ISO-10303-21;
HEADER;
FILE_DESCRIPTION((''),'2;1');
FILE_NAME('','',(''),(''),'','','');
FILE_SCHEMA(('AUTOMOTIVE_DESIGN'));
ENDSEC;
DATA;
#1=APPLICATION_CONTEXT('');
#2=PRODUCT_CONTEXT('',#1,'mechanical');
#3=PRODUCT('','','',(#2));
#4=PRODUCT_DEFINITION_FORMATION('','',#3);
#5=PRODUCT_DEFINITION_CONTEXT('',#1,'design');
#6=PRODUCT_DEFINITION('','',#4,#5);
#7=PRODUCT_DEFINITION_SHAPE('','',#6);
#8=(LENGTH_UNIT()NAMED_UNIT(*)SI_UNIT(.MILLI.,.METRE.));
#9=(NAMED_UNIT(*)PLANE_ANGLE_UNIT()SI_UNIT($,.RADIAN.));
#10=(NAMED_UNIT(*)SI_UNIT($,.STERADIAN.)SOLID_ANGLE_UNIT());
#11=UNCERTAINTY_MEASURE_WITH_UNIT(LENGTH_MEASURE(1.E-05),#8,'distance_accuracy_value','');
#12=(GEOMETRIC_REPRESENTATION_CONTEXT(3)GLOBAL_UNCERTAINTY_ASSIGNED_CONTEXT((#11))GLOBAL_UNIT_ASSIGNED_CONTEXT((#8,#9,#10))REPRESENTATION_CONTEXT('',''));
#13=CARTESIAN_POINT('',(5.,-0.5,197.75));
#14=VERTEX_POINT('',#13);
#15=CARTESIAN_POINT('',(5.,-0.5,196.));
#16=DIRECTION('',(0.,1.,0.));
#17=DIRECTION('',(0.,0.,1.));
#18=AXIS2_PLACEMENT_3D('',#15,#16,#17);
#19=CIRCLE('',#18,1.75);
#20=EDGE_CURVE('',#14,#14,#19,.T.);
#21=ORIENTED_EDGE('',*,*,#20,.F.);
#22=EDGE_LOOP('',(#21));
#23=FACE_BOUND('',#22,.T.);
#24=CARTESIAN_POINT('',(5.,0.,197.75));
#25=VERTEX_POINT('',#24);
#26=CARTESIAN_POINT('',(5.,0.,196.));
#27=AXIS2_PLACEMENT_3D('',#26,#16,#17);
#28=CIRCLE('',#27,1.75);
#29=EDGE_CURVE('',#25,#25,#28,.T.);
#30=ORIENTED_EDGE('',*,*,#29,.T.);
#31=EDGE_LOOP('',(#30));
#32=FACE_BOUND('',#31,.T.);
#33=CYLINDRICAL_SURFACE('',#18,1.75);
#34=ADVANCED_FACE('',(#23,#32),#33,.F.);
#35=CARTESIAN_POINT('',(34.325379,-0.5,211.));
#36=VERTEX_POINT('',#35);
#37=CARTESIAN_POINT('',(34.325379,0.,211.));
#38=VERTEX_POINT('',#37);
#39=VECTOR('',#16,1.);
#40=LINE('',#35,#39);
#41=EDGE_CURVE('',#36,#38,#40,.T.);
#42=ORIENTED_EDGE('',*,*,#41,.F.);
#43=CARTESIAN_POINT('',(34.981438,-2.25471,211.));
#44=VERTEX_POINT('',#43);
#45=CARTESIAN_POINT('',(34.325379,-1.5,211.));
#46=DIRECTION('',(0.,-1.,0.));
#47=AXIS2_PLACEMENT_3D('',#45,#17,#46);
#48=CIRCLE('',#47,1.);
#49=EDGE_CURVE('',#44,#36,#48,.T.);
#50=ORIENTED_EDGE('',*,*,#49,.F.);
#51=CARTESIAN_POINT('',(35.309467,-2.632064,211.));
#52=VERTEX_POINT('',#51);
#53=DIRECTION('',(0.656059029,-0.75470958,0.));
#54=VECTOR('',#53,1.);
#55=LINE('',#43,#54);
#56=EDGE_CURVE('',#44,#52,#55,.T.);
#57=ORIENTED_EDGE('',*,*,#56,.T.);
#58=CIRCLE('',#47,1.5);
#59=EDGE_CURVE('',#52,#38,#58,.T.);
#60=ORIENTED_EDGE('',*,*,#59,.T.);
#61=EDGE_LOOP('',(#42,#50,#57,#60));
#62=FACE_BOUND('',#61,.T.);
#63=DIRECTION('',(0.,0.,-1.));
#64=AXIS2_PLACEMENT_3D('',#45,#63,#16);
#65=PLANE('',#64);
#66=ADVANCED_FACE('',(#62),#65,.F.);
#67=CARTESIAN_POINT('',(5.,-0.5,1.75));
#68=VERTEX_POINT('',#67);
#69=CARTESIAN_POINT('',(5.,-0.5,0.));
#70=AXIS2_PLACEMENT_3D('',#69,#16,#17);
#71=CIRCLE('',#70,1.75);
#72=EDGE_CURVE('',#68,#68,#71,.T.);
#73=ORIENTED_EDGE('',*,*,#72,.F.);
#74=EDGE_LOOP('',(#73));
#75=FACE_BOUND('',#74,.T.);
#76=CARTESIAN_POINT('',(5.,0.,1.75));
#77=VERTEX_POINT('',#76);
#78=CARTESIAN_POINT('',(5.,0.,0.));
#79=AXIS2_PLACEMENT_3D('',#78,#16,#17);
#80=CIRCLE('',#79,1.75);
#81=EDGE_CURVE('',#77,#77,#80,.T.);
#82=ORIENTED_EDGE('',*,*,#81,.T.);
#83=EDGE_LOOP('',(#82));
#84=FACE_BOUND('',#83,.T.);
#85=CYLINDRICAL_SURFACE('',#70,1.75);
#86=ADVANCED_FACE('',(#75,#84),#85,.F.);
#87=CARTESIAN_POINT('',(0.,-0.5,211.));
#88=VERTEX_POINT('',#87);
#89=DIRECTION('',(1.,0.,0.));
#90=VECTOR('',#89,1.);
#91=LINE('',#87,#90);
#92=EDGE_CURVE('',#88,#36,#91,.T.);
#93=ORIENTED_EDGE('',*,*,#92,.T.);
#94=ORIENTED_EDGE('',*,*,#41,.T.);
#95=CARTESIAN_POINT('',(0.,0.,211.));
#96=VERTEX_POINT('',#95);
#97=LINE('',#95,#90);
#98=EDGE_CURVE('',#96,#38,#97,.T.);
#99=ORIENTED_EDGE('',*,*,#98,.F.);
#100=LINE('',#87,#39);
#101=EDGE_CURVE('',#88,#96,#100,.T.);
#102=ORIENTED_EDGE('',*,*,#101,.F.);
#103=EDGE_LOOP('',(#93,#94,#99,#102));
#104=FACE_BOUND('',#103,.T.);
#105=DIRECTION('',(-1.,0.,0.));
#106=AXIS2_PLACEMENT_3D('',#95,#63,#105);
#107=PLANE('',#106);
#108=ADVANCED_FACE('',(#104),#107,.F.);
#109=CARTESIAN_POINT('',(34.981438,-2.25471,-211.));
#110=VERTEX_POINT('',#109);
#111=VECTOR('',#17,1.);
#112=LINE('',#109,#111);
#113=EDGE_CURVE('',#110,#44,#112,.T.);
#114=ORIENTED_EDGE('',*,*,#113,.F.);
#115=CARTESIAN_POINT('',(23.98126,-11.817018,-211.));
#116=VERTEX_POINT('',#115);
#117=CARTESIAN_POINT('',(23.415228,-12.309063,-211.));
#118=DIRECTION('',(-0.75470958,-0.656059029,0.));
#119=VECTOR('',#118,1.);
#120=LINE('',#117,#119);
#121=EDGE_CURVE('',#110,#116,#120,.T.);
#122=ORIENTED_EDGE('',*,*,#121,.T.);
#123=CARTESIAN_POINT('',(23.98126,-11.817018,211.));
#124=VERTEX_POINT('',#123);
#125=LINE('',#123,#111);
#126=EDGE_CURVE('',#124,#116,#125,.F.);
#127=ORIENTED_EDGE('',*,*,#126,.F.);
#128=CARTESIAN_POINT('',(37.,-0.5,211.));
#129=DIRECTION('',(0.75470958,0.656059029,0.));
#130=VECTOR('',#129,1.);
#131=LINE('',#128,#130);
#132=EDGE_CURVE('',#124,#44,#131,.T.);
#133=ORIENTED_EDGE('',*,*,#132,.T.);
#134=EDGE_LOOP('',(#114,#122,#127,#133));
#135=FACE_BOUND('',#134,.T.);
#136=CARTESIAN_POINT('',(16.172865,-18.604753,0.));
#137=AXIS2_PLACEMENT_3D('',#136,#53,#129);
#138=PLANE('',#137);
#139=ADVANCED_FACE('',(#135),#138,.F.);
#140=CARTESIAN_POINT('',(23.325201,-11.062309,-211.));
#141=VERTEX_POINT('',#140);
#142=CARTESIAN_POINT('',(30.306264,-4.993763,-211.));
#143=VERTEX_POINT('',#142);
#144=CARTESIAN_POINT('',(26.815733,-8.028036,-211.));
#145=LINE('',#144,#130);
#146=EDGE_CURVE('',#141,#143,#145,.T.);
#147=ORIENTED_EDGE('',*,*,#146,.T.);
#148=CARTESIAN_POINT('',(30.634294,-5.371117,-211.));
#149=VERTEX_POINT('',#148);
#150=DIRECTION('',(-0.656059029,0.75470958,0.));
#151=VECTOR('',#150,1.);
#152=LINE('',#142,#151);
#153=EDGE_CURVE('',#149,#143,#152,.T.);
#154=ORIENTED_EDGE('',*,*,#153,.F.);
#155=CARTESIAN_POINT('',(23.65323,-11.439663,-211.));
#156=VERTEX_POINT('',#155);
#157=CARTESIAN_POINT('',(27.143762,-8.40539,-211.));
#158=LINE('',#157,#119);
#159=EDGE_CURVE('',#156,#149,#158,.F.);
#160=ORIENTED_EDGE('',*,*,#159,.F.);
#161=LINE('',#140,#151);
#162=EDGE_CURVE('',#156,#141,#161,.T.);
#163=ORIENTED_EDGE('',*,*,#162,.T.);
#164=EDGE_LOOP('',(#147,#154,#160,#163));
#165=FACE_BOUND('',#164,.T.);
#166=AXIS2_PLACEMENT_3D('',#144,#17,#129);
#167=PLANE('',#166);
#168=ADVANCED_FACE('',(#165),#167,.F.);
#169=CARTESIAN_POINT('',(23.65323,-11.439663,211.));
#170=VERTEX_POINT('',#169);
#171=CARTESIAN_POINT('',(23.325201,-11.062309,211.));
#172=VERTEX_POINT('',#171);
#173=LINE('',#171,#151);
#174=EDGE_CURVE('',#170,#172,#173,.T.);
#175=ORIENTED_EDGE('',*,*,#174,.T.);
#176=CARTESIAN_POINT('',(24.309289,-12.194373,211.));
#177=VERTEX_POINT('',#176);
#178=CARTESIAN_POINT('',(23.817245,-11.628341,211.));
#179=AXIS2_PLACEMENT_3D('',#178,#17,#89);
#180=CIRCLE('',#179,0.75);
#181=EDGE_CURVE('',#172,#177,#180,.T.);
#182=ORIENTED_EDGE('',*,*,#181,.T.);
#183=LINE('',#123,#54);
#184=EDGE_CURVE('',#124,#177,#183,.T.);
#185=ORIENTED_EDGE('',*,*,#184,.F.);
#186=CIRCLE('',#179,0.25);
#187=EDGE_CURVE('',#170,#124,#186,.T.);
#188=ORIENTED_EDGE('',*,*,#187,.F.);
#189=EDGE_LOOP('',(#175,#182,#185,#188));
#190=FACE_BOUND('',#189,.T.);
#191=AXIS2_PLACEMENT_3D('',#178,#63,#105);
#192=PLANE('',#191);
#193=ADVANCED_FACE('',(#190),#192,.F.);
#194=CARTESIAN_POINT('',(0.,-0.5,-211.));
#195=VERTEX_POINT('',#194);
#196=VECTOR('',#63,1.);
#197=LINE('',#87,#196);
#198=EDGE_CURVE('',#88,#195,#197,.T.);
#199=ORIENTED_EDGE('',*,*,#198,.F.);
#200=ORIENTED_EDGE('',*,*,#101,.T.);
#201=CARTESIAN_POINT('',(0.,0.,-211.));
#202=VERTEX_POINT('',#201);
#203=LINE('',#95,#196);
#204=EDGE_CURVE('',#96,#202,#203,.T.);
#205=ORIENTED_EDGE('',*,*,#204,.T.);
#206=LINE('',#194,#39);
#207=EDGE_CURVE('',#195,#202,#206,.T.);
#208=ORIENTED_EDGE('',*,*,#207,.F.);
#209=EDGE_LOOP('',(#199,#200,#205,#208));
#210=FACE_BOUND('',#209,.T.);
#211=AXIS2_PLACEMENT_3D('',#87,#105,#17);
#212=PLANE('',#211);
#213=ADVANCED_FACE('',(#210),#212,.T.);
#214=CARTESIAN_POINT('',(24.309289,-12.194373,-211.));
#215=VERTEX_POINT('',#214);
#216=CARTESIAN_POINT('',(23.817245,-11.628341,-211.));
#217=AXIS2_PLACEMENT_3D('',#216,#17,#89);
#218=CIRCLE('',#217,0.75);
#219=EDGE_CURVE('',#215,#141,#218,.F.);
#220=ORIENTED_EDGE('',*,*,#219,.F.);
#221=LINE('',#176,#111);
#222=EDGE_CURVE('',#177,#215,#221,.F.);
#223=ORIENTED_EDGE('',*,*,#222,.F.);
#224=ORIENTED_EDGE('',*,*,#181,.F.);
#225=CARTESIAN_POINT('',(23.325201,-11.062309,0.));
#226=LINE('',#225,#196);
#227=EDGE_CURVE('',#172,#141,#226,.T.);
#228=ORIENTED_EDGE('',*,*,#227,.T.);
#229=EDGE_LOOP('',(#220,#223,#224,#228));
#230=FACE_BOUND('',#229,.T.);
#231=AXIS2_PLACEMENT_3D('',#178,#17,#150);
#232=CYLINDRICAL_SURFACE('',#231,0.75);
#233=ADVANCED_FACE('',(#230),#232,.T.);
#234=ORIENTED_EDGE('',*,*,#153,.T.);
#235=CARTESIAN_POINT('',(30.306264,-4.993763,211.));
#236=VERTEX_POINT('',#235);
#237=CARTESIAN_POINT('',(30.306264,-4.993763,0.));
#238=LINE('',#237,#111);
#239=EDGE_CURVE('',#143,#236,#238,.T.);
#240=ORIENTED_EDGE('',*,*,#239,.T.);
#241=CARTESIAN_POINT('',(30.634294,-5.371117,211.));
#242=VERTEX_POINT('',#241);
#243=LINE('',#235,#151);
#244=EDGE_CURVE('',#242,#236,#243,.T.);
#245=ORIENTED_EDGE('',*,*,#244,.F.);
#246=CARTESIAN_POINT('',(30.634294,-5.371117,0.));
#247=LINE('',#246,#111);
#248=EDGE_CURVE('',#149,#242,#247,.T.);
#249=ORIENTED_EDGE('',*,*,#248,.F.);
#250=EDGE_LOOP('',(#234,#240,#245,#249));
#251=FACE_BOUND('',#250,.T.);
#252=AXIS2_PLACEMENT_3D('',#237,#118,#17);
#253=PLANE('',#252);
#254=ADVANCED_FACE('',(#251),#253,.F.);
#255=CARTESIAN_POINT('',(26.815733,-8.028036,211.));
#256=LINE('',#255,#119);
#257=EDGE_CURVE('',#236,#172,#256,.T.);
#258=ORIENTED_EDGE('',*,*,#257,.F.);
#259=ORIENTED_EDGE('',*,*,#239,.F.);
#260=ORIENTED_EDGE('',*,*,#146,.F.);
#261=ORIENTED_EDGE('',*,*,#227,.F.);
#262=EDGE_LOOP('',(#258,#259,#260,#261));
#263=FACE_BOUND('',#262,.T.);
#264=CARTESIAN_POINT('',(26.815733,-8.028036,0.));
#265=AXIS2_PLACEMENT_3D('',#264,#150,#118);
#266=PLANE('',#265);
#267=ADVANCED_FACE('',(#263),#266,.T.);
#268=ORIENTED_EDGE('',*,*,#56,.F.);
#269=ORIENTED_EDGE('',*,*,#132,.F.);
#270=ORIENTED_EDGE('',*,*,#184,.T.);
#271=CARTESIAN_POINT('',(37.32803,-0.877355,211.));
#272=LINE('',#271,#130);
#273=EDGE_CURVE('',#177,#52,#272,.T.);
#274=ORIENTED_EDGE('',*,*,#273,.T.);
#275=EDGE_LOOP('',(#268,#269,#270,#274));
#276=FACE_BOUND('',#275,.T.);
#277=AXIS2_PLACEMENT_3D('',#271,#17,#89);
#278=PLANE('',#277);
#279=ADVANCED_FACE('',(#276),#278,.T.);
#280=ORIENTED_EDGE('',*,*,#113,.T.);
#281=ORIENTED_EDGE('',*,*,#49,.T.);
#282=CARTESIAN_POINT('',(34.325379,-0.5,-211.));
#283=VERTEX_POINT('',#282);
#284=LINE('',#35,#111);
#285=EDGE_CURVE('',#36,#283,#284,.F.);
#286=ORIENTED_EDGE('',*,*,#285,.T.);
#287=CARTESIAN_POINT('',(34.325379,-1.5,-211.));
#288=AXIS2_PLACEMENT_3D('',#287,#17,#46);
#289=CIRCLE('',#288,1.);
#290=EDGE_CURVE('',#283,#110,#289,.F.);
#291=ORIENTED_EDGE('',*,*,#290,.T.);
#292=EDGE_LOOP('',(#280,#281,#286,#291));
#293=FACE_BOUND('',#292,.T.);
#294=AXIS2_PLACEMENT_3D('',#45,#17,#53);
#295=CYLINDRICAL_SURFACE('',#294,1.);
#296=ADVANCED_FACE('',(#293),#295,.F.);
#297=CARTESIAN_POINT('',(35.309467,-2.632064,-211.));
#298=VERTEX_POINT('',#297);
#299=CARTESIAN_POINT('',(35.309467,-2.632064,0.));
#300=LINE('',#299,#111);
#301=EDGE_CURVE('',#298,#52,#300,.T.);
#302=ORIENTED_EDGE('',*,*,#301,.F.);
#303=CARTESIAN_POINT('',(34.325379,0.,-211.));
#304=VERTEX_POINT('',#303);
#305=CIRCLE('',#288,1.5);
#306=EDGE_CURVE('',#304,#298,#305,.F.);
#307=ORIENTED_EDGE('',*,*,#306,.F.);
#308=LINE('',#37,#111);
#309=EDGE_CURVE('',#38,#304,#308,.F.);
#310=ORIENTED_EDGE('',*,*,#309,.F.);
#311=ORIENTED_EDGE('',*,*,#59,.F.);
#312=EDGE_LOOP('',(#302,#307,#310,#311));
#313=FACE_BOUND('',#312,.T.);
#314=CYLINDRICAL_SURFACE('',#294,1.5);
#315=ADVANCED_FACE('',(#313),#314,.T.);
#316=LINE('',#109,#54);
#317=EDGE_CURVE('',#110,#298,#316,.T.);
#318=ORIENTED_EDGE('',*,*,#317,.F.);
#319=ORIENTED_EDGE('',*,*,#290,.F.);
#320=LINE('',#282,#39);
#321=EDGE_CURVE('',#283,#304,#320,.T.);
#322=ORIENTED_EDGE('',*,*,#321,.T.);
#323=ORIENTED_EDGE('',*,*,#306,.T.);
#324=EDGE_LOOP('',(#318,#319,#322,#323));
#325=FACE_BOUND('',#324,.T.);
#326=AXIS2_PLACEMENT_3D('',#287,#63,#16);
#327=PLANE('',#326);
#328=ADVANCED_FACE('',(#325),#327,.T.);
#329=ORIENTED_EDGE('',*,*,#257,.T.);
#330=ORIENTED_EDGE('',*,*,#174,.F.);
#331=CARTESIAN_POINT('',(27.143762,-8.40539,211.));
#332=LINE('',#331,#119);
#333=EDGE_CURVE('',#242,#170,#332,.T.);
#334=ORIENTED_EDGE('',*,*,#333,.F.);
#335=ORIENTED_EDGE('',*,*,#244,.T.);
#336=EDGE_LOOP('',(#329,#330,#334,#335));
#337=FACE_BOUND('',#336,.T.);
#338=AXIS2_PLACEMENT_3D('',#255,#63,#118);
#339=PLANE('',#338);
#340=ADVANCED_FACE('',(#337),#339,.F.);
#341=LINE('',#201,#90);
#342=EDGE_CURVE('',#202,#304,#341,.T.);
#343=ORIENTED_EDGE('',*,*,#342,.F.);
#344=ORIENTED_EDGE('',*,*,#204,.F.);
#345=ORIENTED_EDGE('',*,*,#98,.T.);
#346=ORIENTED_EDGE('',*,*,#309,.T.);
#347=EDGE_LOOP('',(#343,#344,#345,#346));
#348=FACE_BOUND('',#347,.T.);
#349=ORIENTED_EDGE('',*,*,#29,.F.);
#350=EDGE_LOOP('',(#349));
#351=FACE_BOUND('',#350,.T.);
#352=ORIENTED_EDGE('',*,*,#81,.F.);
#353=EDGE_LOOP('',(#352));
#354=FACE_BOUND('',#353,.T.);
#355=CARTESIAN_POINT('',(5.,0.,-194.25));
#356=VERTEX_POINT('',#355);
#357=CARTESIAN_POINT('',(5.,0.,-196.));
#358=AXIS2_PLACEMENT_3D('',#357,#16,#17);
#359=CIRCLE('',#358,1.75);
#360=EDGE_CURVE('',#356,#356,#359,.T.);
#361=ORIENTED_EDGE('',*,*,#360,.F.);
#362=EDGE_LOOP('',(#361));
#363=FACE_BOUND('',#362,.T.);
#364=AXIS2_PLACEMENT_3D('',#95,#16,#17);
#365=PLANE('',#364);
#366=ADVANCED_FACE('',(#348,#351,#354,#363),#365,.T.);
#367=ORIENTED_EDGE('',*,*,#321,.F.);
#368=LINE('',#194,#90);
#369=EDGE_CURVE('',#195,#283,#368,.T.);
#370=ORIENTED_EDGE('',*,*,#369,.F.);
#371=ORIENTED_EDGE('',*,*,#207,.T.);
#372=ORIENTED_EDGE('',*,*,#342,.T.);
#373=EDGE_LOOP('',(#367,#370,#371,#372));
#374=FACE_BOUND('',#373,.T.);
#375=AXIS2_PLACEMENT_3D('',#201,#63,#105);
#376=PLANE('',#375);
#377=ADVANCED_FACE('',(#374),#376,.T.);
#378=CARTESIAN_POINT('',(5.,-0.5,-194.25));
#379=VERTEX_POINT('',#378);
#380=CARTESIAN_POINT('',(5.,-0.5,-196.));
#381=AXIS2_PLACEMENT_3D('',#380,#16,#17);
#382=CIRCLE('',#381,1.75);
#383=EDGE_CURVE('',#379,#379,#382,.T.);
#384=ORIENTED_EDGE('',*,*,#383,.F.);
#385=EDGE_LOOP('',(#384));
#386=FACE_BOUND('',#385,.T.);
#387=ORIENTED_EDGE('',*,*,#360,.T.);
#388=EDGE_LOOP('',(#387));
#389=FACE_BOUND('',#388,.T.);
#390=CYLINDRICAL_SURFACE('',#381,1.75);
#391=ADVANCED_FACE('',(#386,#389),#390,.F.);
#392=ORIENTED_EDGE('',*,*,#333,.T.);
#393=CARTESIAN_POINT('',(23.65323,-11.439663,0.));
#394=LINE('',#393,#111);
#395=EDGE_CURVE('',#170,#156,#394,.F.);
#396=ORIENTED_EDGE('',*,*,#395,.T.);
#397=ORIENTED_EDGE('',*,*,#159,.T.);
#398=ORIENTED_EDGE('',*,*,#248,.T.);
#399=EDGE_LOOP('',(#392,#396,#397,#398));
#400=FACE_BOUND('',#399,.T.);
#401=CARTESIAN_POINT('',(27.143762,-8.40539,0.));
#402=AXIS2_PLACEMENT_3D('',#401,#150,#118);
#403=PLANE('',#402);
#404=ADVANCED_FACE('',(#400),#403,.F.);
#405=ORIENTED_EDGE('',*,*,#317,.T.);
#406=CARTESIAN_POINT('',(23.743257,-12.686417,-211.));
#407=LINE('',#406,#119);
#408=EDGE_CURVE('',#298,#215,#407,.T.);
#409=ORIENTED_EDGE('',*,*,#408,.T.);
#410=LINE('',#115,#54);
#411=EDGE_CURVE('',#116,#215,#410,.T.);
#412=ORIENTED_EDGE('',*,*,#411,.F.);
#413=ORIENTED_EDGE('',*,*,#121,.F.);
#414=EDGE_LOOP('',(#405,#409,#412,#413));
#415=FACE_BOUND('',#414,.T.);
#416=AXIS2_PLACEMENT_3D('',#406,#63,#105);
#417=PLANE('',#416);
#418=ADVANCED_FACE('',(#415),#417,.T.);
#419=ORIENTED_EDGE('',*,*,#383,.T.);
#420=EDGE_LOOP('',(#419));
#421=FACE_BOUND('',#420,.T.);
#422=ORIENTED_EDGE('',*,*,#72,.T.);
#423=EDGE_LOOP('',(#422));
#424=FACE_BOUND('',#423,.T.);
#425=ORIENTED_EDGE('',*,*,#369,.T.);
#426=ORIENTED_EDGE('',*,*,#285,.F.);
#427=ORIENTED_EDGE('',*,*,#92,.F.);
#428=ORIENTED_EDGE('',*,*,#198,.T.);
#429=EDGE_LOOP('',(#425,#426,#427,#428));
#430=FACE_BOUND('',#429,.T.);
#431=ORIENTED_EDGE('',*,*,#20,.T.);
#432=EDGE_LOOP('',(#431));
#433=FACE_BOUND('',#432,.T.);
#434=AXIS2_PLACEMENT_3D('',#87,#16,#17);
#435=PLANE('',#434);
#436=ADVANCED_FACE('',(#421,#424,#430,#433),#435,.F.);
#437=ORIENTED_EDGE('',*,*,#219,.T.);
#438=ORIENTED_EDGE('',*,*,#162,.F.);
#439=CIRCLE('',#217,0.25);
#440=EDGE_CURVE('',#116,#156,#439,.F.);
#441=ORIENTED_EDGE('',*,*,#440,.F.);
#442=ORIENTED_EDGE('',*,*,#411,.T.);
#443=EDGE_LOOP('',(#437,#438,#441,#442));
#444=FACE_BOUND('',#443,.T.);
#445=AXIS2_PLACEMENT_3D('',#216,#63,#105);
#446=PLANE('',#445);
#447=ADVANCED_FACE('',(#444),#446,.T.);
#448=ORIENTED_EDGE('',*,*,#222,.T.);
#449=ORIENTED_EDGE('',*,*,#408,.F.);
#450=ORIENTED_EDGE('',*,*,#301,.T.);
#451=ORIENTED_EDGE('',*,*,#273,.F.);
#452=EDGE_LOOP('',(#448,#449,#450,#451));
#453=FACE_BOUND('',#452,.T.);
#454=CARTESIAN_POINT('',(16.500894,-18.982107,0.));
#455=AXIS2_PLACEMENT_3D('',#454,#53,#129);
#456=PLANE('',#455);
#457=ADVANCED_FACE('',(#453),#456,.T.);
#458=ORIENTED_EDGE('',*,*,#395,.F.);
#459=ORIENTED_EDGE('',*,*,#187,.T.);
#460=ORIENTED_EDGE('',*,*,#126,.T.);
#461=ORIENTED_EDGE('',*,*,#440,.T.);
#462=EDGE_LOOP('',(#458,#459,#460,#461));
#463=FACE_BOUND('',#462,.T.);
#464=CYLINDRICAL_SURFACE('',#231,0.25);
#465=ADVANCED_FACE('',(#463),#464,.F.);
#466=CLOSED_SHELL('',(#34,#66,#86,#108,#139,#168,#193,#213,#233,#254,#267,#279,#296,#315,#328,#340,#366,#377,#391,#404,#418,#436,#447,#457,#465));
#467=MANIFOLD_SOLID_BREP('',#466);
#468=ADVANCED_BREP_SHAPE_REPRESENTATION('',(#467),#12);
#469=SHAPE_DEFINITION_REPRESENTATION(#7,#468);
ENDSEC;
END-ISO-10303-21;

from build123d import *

# Parameters (mm, degrees)
SKETCH1_W                    = 37
SKETCH1_H                    = 0.5
BASE_FLANGE1_DEPTH           = 211
SKETCH6_R                    = 1.75
CUT_EXTRUDE1_DEPTH           = 10
EDGE_FLANGE1_STRIP_CUT_DEPTH = 422
EDGE_FLANGE1_DEPTH           = 422
HEM1_START                   = -211
HEM1_DEPTH                   = 422
HEM1_2_DEPTH                 = 422


with BuildPart() as part:
    # Base-Flange1: sheet metal written as solids
    # Sketch1 → Base-Flange1 (new, symmetric)
    with BuildSketch(Plane.XY):
        with Locations((18.5, -0.25)):
            Rectangle(SKETCH1_W, SKETCH1_H)
    extrude(amount=BASE_FLANGE1_DEPTH, both=True)

    # Sketch6 → Cut-Extrude1 (cut)
    with BuildSketch(Plane(origin=(0, 0, 0), x_dir=(1, 0, 0), z_dir=(0, 1, 0))):
        with Locations(Location((5, 196, 0), (0, 0, 270))):
            Circle(SKETCH6_R)
        with Locations(Location((5, 0, 0), (0, 0, 270))):
            Circle(SKETCH6_R)
        with Locations(Location((5, -196, 0), (0, 0, 270))):
            Circle(SKETCH6_R)
    extrude(amount=-CUT_EXTRUDE1_DEPTH, mode=Mode.SUBTRACT)

    # Edge-Flange1: sheet metal written as solids
    # Edge-Flange1 strip (on a plane across the edge) → Edge-Flange1 strip cut (cut)
    with BuildSketch(Plane(origin=(37, -0.5, -211), x_dir=(-0.6560590289905086, 0.754709580222771, 0), z_dir=(0, 0, 1))):
        Polygon((-4.886773951, -6.383716909), (2.13206437, 1.69053295), (1.75470958, 2.018562465), (-5.264128741, -6.055687395), align=None)
    extrude(amount=EDGE_FLANGE1_STRIP_CUT_DEPTH, mode=Mode.SUBTRACT)

    # Edge-Flange1 section (on a plane across the edge) → Edge-Flange1 (add)
    with BuildSketch(Plane(origin=(37, -0.5, -211), x_dir=(-0.6560590289905086, 0.754709580222771, 0), z_dir=(0, 0, 1))):
        with BuildLine():
            Line((-0.5, 2.674621494), (-0.5, 18))
            Line((-0.5, 18), (0, 18))
            Line((0, 18), (0, 2.674621494))
            ThreePointArc((0, 2.674621494), (0.649792619, 1.737949305), (1.75470958, 2.018562465))
            Line((1.75470958, 2.018562465), (2.13206437, 1.69053295))
            ThreePointArc((2.13206437, 1.69053295), (0.474688928, 1.26961321), (-0.5, 2.674621494))
        make_face()
    extrude(amount=EDGE_FLANGE1_DEPTH)

    # Hem1: read off the stored shape, not the designer's step
    # Hem1 outline → Hem1 (cut)
    with BuildSketch(Plane.XY.offset(HEM1_START)):
        with BuildLine():
            ThreePointArc((24.309289256, -12.19437304), (23.892198615, -12.374586092), (23.447599479, -12.280922038))
            Line((23.447599479, -12.280922038), (23.415227556, -12.309062522))
            Line((23.415227556, -12.309062522), (23.74325707, -12.686417312))
            Line((23.74325707, -12.686417312), (24.309289256, -12.19437304))
        make_face()
    extrude(amount=HEM1_DEPTH, mode=Mode.SUBTRACT)

    # Hem1 2 outline → Hem1 2 (add)
    with BuildSketch(Plane.XY.offset(HEM1_START)):
        with BuildLine():
            Line((30.634293844, -5.371117442), (30.306264329, -4.993762652))
            Line((30.306264329, -4.993762652), (23.325200712, -11.06230867))
            ThreePointArc((23.325200712, -11.06230867), (23.070999747, -11.703294486), (23.447599479, -12.280922038))
            Line((23.447599479, -12.280922038), (23.981259741, -11.81701825))
            ThreePointArc((23.981259741, -11.81701825), (23.628567589, -11.792355612), (23.653230227, -11.43966346))
            Line((23.653230227, -11.43966346), (30.634293844, -5.371117442))
        make_face()
    extrude(amount=HEM1_2_DEPTH)


solid = part.part
